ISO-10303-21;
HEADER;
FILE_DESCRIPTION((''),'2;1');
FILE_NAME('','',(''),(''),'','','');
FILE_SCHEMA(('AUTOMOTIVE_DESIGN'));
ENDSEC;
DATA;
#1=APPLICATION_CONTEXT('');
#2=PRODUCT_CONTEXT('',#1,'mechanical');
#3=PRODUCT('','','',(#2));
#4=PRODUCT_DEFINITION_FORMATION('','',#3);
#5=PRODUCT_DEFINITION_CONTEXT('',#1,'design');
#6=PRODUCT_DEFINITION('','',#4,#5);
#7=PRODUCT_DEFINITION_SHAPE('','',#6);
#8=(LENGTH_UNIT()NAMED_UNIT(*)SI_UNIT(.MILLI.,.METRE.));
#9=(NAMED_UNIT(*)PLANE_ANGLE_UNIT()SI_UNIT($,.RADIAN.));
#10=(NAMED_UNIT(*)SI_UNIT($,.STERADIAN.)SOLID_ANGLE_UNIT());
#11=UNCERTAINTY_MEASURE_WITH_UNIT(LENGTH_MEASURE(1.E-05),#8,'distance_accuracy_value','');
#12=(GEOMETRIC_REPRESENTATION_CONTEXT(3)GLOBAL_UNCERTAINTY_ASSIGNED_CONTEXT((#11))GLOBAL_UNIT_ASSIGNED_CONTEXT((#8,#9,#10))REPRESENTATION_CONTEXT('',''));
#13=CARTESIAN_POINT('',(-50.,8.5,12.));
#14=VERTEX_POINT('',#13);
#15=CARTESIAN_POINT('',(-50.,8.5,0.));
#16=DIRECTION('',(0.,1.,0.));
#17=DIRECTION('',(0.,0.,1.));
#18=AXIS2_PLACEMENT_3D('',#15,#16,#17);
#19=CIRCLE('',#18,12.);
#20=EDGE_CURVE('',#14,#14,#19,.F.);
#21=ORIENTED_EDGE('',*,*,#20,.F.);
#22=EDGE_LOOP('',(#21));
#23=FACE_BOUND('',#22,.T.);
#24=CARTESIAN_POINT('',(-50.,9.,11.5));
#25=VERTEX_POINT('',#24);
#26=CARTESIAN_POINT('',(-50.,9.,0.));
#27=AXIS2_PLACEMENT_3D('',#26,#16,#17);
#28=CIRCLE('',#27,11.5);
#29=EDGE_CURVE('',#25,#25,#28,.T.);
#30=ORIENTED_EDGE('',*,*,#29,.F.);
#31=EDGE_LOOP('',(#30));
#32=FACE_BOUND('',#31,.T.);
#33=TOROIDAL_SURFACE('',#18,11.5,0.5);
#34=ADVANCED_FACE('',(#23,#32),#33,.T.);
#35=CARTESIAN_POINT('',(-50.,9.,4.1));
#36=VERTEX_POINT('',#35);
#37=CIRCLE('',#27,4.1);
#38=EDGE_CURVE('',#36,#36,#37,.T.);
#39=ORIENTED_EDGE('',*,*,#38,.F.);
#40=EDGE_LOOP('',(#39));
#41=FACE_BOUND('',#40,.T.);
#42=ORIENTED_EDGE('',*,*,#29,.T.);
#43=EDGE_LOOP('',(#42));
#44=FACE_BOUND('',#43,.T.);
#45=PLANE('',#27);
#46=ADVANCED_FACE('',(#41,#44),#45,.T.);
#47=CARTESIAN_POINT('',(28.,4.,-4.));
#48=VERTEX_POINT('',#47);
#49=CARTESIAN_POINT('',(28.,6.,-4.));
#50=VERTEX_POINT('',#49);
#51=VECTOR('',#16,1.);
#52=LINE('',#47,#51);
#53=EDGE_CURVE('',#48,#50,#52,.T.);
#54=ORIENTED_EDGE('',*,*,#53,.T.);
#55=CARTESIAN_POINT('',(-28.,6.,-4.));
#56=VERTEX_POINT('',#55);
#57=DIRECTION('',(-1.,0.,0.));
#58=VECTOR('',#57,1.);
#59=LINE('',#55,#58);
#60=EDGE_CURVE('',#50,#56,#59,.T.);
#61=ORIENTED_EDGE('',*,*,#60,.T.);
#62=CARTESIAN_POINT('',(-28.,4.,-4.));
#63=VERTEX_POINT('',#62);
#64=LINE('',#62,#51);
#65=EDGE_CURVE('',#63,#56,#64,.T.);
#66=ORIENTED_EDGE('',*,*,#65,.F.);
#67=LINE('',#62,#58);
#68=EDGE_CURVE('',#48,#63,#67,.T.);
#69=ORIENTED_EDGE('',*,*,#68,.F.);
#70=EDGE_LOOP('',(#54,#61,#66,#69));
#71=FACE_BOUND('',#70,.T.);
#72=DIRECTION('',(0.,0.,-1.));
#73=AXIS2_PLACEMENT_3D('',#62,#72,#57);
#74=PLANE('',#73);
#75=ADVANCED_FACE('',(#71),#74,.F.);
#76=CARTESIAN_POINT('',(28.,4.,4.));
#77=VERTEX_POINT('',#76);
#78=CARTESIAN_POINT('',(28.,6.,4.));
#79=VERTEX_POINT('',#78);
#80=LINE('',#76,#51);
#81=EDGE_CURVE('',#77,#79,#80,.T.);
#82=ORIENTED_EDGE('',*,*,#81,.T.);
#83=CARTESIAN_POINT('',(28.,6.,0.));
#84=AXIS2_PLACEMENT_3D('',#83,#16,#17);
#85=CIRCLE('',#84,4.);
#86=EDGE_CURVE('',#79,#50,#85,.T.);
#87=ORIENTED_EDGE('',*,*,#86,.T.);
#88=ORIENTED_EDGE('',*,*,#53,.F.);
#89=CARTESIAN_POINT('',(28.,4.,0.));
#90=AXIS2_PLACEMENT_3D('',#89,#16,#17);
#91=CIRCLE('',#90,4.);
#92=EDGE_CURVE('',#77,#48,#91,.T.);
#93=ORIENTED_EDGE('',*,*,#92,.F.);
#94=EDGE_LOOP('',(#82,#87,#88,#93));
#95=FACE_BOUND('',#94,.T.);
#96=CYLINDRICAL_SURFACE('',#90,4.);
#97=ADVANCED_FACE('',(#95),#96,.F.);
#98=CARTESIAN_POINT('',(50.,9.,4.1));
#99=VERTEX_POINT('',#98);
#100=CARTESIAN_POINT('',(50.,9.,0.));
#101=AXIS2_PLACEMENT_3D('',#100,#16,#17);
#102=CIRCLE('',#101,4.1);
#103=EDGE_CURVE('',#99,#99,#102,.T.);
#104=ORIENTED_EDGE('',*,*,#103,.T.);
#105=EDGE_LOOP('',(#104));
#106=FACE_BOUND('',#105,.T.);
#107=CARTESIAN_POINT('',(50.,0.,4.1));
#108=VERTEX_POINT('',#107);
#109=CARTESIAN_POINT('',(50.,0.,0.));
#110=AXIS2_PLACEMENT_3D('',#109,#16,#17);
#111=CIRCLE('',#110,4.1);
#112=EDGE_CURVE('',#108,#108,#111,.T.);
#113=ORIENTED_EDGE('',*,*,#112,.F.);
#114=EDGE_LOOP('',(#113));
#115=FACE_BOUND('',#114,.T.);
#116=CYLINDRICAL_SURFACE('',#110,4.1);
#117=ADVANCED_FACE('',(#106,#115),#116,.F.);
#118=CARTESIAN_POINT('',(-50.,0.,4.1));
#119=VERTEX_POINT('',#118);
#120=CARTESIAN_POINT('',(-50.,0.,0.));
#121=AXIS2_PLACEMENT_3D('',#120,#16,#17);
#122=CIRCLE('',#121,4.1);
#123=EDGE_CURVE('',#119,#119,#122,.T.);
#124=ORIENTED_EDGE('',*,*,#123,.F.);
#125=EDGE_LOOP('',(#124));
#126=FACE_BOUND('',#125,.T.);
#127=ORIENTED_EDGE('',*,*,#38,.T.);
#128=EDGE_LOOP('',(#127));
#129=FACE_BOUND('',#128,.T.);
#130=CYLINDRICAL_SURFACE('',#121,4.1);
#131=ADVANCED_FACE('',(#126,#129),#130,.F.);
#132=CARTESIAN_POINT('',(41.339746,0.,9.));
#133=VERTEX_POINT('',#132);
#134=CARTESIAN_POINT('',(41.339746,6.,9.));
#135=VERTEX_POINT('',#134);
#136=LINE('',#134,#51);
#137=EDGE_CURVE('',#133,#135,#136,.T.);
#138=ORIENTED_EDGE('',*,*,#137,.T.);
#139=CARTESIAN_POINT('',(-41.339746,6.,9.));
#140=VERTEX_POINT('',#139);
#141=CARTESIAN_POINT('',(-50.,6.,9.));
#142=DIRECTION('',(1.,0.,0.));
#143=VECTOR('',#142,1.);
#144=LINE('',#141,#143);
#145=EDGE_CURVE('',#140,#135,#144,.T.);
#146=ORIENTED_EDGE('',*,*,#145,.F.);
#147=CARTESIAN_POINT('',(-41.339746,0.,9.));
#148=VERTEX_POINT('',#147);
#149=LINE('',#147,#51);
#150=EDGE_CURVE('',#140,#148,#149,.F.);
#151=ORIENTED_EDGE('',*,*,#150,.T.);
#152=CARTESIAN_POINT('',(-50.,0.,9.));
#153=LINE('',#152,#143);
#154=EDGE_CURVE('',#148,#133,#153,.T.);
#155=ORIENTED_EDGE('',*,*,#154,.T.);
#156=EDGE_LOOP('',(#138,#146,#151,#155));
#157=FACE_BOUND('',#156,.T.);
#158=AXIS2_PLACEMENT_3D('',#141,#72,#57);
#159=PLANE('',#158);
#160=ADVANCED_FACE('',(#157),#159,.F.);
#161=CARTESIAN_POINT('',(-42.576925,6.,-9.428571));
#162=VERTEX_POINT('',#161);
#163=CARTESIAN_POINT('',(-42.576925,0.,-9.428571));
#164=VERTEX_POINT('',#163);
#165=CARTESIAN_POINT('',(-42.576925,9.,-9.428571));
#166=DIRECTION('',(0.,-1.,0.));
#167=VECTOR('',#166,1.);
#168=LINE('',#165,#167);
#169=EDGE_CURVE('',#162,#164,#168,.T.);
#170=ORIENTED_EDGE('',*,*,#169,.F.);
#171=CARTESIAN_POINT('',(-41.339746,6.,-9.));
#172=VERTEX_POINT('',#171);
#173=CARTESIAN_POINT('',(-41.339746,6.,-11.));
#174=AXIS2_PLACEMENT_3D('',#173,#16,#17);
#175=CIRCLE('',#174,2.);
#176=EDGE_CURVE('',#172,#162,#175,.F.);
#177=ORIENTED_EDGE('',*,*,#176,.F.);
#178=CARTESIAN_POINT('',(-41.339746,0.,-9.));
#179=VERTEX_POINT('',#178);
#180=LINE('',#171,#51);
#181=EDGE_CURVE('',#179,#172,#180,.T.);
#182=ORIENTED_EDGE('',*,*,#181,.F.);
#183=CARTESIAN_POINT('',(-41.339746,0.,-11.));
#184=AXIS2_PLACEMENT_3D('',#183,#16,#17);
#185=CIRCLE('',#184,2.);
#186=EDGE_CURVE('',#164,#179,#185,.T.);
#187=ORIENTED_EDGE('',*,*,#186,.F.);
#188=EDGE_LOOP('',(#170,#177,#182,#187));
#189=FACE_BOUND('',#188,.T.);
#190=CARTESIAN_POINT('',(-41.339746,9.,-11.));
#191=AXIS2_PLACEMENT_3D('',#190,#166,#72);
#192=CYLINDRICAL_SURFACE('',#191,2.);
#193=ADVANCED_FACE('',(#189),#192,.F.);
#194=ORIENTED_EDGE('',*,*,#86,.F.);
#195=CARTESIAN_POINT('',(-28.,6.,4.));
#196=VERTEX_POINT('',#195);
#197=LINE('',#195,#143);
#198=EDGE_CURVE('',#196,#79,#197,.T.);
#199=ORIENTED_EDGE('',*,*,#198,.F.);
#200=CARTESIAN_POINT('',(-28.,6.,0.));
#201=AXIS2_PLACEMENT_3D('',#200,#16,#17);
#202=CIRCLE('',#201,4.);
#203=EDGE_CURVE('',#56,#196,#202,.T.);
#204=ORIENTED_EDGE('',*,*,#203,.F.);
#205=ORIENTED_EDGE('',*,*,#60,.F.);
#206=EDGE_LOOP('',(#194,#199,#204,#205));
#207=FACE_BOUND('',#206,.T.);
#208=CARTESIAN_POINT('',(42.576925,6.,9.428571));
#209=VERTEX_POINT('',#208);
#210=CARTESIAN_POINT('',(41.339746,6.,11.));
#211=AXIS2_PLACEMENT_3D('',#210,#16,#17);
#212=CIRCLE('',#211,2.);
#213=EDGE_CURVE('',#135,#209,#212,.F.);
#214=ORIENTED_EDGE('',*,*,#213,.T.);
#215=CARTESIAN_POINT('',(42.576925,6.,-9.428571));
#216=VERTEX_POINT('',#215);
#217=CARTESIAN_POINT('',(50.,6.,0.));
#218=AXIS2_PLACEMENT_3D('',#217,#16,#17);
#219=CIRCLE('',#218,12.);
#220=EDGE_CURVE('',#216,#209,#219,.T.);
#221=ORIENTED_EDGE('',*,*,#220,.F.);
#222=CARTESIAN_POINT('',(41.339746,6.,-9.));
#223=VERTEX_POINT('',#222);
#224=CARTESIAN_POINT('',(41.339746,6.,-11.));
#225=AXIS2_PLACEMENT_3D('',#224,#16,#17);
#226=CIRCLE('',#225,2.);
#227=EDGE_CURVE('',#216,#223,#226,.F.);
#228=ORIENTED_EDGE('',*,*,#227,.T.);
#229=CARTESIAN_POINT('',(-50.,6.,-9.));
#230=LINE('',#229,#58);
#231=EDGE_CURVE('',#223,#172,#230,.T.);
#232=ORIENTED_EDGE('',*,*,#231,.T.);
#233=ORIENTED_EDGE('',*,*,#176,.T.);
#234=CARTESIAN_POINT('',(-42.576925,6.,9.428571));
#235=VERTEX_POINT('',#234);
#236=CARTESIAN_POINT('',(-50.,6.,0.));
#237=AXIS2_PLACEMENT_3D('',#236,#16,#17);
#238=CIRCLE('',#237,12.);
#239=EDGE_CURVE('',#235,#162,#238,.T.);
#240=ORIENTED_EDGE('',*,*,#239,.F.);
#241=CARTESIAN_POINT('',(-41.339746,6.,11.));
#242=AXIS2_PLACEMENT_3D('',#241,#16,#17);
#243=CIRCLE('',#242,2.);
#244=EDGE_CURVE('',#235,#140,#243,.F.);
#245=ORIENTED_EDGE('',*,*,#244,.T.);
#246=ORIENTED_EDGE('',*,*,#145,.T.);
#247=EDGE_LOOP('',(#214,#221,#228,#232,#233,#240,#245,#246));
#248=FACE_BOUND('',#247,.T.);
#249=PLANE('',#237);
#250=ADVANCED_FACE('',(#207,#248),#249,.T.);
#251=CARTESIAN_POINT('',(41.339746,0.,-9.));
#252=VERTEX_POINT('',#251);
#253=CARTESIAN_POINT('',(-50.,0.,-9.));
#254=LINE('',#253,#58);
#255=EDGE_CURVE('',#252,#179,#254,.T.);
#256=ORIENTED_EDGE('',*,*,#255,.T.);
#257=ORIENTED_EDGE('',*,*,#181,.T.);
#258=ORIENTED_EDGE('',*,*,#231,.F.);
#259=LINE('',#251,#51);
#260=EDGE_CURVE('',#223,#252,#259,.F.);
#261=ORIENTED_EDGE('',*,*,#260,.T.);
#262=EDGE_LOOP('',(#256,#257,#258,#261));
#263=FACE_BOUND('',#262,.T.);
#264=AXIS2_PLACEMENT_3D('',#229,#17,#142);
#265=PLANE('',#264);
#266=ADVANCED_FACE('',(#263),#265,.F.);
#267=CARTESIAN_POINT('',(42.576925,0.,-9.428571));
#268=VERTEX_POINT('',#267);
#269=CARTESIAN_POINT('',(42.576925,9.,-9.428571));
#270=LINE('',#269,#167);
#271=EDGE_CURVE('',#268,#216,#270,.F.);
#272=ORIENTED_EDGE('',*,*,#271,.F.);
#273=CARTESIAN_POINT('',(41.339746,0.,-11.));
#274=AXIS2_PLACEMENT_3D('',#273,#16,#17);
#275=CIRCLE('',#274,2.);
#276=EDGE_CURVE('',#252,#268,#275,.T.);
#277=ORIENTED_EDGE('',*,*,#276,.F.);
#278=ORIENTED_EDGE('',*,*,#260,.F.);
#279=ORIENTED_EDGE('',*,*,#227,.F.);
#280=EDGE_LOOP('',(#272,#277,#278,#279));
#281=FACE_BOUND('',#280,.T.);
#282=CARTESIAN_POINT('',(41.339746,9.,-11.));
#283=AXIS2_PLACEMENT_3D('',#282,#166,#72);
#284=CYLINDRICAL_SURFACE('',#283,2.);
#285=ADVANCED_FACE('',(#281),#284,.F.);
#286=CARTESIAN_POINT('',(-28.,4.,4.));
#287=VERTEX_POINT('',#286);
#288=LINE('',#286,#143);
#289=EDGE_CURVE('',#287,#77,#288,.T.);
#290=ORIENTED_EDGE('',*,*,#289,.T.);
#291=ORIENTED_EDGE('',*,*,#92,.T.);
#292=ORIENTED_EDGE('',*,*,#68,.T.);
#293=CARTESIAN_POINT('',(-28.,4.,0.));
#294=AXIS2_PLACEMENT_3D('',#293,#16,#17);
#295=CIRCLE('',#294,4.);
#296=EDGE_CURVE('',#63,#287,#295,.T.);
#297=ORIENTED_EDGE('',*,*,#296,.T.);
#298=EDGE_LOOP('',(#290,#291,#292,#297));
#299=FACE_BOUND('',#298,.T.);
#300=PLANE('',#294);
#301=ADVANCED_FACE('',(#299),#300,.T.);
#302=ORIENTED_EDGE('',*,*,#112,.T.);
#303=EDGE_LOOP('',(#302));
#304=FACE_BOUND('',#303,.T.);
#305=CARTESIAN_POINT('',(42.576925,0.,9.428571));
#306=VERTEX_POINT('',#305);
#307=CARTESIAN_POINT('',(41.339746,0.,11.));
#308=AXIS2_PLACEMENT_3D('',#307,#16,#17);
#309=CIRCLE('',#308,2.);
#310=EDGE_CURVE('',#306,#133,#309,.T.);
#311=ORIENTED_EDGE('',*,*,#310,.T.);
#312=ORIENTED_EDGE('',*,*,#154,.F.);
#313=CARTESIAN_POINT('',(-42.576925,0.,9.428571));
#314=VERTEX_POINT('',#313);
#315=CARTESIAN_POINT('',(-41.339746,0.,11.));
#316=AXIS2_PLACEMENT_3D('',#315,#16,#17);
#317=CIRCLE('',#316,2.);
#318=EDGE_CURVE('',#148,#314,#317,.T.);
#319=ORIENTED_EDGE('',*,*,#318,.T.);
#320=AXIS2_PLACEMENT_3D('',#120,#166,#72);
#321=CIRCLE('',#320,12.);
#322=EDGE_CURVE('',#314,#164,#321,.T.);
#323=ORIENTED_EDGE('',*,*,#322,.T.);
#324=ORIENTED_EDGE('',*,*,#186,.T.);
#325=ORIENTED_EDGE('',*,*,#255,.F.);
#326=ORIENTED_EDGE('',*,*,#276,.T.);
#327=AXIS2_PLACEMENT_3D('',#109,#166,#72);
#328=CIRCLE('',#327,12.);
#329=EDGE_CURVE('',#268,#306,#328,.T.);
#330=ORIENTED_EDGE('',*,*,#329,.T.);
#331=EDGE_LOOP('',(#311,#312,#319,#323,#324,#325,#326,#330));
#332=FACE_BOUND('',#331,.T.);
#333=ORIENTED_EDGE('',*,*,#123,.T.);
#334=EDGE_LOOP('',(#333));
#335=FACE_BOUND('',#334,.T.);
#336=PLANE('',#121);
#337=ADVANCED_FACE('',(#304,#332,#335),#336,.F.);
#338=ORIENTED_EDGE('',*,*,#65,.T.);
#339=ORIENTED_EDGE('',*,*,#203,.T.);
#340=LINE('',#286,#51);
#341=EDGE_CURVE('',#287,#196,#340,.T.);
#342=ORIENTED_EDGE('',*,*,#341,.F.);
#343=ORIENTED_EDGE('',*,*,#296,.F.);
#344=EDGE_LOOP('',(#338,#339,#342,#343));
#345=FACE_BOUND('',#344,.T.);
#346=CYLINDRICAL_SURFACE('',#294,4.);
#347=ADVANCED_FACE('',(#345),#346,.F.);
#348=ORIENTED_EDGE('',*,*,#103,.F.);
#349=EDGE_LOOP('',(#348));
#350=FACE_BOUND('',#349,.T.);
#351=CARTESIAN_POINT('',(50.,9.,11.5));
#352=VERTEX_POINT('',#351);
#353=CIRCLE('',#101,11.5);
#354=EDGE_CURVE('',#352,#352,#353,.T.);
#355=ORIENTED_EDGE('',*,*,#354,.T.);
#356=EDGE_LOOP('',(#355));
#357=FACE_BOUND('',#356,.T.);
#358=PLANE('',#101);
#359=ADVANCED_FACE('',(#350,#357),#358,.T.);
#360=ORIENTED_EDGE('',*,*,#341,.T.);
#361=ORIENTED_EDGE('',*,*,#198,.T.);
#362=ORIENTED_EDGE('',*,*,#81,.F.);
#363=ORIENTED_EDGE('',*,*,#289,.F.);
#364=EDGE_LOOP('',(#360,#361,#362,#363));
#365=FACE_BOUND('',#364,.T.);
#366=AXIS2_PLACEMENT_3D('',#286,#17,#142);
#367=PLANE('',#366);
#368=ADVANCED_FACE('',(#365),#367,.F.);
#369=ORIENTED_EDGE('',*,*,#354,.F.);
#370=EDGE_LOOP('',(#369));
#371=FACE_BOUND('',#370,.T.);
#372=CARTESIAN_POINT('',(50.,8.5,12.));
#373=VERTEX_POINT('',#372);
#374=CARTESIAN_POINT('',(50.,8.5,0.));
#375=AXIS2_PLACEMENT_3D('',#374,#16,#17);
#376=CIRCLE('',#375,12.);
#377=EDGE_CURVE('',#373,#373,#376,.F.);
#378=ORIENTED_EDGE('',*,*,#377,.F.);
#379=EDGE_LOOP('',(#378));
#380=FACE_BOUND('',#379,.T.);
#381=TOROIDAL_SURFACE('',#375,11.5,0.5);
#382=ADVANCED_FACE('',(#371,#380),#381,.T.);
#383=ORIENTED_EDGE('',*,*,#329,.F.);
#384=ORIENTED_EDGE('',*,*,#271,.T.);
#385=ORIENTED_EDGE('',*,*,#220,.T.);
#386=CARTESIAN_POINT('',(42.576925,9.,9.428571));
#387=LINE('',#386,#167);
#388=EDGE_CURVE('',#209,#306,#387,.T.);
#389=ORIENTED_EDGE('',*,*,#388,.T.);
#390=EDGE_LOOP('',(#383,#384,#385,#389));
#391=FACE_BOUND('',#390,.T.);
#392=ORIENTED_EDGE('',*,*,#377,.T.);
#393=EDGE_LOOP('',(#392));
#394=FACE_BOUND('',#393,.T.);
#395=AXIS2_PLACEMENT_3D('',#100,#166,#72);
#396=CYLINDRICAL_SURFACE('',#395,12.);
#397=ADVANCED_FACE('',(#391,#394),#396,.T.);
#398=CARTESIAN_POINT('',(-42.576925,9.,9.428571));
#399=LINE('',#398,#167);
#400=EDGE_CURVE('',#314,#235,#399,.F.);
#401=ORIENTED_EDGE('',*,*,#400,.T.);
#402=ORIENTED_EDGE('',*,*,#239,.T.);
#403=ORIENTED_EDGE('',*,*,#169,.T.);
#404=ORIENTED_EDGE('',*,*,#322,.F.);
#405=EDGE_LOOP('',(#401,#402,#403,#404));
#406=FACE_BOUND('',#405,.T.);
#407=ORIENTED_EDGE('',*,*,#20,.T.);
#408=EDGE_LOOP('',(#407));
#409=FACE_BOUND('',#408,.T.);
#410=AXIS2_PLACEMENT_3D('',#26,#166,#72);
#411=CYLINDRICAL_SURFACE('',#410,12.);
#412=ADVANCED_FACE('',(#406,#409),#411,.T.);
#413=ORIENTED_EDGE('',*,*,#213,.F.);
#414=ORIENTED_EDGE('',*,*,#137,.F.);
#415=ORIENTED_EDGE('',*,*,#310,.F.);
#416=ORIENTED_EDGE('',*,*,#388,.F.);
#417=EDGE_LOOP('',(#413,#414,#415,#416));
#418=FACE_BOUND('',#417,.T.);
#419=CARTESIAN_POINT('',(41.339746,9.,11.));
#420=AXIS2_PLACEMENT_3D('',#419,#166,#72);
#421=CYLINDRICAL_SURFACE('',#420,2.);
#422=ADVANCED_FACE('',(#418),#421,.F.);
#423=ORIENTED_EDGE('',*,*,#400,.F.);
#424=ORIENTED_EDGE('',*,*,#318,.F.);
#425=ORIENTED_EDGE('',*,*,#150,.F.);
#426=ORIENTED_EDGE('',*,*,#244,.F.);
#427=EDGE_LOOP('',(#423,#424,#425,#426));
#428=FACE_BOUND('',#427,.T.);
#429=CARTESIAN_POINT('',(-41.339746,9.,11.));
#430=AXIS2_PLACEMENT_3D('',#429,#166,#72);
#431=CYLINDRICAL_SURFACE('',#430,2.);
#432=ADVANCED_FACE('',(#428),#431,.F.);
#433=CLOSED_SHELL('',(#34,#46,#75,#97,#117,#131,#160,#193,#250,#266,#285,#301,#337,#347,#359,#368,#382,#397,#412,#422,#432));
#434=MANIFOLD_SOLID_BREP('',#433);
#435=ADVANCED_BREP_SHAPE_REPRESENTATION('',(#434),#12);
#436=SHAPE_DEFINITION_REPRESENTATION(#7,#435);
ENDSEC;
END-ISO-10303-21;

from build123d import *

# Parameters (mm, degrees)
EXTRUDE_1_DEPTH     = 6
SKETCH_2_R          = 12
EXTRUDE_2_DEPTH     = 3
SKETCH_3_R          = 4.1
CUT_EXTRUDE_1_DEPTH = 64.788713735
CUT_EXTRUDE_2_DEPTH = 2
FILLET_1_R          = 0.5
SKETCH_5_R          = 12
SKETCH_5_R_2        = 4.1
EXTRUDE_3_DEPTH     = 6
FILLET_2_R          = 2


with BuildPart() as part:
    # 草图1 → 凸台-拉伸1 (new body)
    with BuildSketch(Plane(origin=(0, 0, 0), x_dir=(1, 0, 0), z_dir=(0, 1, 0))):
        with BuildLine():
            Line((-50, 9), (50, 9))
            ThreePointArc((50, 9), (59, 0), (50, -9))
            Line((50, -9), (-50, -9))
            ThreePointArc((-50, -9), (-59, 0), (-50, 9))
        make_face()
    extrude(amount=EXTRUDE_1_DEPTH)

    # 草图2 → 凸台-拉伸2 (add)
    with BuildSketch(Plane(origin=(0, 6, 0), x_dir=(1, 0, 0), z_dir=(0, 1, 0))):
        with Locations((-50, 0)):
            Circle(SKETCH_2_R)
        with Locations((50, 0)):
            Circle(SKETCH_2_R)
    extrude(amount=EXTRUDE_2_DEPTH)

    # 草图3 → 切除-拉伸1 (cut, through all)
    with BuildSketch(Plane(origin=(0, 9, 0), x_dir=(1, 0, 0), z_dir=(0, 1, 0))):
        with Locations((-50, 0)):
            Circle(SKETCH_3_R)
        with Locations((50, 0)):
            Circle(SKETCH_3_R)
    extrude(amount=-CUT_EXTRUDE_1_DEPTH, mode=Mode.SUBTRACT)

    # 草图4 → 切除-拉伸2 (cut)
    with BuildSketch(Plane(origin=(0, 6, 0), x_dir=(1, 0, 0), z_dir=(0, 1, 0))):
        with BuildLine():
            Line((-28, 4), (28, 4))
            ThreePointArc((28, 4), (32, 0), (28, -4))
            Line((28, -4), (-28, -4))
            ThreePointArc((-28, -4), (-32, 0), (-28, 4))
        make_face()
    extrude(amount=-CUT_EXTRUDE_2_DEPTH, mode=Mode.SUBTRACT)

    # 圆角1
    fillet_1_edges = [part.edges().sort_by_distance(p)[0] for p in [
        (38, 9, 0),
        (-62, 9, 0),
    ]]
    fillet(fillet_1_edges, radius=FILLET_1_R)

    # 草图5 → 凸台-拉伸3 (add)
    # profile 1 of 2: a face of its own
    with BuildSketch(Plane.XZ):
        with Locations((-50, 0)):
            Circle(SKETCH_5_R)
        with Locations((-50, 0)):
            Circle(SKETCH_5_R_2, mode=Mode.SUBTRACT)
    # profile 2 of 2: a face of its own
    with BuildSketch(Plane.XZ):
        with Locations((50, 0)):
            Circle(SKETCH_5_R)
        with Locations((50, 0)):
            Circle(SKETCH_5_R_2, mode=Mode.SUBTRACT)
    extrude(amount=-EXTRUDE_3_DEPTH)

    # 圆角2
    fillet_2_edges = [part.edges().sort_by_distance(p)[0] for p in [
        (-42.062746067, 3, -9),
        (42.062746067, 3, -9),
        (42.062746067, 3, 9),
        (-42.062746067, 3, 9),
    ]]
    fillet(fillet_2_edges, radius=FILLET_2_R)


solid = part.part
